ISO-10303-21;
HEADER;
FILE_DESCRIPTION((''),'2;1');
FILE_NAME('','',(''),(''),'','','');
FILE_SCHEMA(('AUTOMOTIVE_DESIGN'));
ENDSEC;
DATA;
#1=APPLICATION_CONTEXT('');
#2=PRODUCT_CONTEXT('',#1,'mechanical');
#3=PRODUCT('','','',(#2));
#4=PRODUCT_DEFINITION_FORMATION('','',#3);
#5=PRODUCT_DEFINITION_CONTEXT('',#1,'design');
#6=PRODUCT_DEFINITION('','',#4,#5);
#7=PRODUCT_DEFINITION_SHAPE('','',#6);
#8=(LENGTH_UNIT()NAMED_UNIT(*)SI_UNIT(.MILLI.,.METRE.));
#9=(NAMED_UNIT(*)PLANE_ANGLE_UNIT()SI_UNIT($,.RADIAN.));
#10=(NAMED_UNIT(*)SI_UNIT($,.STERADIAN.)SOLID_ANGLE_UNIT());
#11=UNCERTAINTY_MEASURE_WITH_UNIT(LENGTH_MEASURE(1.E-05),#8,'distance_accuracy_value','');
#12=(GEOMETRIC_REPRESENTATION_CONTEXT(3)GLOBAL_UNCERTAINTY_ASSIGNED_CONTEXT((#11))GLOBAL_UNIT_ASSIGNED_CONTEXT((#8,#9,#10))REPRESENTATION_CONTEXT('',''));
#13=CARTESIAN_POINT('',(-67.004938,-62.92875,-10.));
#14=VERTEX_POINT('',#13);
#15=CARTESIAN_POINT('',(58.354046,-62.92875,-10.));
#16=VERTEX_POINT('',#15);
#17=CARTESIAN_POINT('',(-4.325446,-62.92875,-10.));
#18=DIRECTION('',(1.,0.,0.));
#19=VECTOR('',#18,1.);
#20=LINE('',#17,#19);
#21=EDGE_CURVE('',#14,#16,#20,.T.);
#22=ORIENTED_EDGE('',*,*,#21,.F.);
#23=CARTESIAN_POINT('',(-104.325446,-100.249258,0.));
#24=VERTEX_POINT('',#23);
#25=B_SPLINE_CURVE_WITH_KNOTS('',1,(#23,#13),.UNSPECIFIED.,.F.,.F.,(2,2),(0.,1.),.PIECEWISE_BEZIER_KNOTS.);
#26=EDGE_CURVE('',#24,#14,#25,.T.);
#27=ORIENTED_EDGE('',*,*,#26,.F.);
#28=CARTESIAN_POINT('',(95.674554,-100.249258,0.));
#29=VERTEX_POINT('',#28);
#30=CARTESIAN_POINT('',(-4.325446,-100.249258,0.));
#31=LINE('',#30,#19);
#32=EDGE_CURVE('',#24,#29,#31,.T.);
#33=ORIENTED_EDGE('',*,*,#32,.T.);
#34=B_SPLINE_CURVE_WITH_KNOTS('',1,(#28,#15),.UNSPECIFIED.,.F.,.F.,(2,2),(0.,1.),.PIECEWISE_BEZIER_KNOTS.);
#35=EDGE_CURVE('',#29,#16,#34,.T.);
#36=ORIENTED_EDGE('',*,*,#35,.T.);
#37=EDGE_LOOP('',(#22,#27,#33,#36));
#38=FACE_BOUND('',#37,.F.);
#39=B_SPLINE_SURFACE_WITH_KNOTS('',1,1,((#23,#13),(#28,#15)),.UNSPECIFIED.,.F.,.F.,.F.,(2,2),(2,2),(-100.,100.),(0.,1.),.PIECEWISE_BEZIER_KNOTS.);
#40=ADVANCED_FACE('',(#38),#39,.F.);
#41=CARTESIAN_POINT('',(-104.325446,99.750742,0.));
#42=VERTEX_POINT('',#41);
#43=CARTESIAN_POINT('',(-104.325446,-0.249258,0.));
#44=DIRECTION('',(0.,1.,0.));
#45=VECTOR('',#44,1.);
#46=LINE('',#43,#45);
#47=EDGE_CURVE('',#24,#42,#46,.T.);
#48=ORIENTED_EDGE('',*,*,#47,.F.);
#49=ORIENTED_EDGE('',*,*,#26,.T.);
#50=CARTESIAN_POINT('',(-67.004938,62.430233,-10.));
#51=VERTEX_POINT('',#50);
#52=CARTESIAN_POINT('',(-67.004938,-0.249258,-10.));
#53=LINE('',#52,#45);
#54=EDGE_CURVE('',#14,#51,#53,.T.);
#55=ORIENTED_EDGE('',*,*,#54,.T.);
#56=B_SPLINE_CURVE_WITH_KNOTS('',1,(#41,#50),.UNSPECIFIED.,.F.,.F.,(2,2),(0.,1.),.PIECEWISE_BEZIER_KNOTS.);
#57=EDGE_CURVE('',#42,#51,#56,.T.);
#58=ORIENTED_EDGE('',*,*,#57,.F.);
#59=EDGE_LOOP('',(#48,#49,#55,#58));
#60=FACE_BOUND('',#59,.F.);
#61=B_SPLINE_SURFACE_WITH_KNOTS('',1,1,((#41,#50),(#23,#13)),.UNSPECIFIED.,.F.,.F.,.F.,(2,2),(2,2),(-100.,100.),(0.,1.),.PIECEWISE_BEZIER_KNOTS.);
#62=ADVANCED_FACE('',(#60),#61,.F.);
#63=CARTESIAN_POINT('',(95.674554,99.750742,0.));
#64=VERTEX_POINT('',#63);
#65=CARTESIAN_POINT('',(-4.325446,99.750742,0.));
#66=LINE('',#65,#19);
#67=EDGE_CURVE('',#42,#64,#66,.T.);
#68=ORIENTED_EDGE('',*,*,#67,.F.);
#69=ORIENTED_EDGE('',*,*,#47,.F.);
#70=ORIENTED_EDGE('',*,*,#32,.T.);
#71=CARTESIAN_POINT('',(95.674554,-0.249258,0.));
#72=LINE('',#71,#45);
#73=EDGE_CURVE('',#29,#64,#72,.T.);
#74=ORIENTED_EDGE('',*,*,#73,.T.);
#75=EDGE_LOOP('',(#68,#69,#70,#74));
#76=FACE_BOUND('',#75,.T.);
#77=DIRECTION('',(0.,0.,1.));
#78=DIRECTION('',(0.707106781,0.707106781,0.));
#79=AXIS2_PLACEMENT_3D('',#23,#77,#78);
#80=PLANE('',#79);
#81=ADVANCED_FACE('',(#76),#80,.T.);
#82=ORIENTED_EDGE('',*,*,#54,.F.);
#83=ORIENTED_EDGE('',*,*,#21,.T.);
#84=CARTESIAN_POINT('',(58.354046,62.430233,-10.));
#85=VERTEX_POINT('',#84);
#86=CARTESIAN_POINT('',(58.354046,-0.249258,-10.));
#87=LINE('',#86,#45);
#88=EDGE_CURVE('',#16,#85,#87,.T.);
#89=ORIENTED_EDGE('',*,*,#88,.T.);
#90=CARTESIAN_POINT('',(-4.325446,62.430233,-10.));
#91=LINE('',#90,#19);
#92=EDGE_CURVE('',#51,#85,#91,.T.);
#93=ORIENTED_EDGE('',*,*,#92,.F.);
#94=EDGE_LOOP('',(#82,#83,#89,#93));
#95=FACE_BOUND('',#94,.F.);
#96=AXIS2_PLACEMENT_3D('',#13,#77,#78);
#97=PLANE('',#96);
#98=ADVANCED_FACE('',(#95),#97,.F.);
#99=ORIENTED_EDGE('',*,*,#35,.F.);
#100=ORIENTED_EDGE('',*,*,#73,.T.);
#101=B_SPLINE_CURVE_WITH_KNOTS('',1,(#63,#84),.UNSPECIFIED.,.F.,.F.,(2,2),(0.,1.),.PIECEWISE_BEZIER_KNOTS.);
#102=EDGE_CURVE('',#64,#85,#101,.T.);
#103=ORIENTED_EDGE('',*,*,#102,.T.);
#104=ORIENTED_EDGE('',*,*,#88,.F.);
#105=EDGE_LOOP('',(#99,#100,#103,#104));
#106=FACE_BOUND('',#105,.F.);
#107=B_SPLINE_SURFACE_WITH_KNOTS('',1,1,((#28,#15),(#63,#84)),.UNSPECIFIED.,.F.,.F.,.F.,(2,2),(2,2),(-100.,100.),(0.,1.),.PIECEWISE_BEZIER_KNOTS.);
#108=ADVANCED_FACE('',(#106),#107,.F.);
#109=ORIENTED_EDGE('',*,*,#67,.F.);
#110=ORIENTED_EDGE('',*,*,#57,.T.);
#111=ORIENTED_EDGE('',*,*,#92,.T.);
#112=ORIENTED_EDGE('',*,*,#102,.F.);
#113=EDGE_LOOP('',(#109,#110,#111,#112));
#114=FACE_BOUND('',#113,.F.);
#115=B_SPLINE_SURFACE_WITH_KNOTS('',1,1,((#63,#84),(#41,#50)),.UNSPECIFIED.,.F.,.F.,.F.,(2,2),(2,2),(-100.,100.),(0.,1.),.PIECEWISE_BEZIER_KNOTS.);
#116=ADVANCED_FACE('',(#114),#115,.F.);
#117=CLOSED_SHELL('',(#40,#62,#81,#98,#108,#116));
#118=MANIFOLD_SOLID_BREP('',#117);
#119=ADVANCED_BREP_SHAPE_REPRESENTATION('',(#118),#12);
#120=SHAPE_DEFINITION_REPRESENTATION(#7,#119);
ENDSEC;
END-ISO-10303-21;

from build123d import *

# Parameters (mm, degrees)
F0_W     = 200
F0_H     = 200
F1_DEPTH = 10
F1_TAPER = 75


# Not quite as in the source:
# - a feature of the source that left no trace in its solid (it failed there, or was rolled back) is left out


with BuildPart() as f1:
    # F0 (on Top) → F1 (new body)
    with BuildSketch(Plane.XY):
        with Locations((-4.3254461373, -0.2492584803)):
            Rectangle(F0_W, F0_H)
    extrude(amount=-F1_DEPTH, taper=F1_TAPER)


solid = f1.part
